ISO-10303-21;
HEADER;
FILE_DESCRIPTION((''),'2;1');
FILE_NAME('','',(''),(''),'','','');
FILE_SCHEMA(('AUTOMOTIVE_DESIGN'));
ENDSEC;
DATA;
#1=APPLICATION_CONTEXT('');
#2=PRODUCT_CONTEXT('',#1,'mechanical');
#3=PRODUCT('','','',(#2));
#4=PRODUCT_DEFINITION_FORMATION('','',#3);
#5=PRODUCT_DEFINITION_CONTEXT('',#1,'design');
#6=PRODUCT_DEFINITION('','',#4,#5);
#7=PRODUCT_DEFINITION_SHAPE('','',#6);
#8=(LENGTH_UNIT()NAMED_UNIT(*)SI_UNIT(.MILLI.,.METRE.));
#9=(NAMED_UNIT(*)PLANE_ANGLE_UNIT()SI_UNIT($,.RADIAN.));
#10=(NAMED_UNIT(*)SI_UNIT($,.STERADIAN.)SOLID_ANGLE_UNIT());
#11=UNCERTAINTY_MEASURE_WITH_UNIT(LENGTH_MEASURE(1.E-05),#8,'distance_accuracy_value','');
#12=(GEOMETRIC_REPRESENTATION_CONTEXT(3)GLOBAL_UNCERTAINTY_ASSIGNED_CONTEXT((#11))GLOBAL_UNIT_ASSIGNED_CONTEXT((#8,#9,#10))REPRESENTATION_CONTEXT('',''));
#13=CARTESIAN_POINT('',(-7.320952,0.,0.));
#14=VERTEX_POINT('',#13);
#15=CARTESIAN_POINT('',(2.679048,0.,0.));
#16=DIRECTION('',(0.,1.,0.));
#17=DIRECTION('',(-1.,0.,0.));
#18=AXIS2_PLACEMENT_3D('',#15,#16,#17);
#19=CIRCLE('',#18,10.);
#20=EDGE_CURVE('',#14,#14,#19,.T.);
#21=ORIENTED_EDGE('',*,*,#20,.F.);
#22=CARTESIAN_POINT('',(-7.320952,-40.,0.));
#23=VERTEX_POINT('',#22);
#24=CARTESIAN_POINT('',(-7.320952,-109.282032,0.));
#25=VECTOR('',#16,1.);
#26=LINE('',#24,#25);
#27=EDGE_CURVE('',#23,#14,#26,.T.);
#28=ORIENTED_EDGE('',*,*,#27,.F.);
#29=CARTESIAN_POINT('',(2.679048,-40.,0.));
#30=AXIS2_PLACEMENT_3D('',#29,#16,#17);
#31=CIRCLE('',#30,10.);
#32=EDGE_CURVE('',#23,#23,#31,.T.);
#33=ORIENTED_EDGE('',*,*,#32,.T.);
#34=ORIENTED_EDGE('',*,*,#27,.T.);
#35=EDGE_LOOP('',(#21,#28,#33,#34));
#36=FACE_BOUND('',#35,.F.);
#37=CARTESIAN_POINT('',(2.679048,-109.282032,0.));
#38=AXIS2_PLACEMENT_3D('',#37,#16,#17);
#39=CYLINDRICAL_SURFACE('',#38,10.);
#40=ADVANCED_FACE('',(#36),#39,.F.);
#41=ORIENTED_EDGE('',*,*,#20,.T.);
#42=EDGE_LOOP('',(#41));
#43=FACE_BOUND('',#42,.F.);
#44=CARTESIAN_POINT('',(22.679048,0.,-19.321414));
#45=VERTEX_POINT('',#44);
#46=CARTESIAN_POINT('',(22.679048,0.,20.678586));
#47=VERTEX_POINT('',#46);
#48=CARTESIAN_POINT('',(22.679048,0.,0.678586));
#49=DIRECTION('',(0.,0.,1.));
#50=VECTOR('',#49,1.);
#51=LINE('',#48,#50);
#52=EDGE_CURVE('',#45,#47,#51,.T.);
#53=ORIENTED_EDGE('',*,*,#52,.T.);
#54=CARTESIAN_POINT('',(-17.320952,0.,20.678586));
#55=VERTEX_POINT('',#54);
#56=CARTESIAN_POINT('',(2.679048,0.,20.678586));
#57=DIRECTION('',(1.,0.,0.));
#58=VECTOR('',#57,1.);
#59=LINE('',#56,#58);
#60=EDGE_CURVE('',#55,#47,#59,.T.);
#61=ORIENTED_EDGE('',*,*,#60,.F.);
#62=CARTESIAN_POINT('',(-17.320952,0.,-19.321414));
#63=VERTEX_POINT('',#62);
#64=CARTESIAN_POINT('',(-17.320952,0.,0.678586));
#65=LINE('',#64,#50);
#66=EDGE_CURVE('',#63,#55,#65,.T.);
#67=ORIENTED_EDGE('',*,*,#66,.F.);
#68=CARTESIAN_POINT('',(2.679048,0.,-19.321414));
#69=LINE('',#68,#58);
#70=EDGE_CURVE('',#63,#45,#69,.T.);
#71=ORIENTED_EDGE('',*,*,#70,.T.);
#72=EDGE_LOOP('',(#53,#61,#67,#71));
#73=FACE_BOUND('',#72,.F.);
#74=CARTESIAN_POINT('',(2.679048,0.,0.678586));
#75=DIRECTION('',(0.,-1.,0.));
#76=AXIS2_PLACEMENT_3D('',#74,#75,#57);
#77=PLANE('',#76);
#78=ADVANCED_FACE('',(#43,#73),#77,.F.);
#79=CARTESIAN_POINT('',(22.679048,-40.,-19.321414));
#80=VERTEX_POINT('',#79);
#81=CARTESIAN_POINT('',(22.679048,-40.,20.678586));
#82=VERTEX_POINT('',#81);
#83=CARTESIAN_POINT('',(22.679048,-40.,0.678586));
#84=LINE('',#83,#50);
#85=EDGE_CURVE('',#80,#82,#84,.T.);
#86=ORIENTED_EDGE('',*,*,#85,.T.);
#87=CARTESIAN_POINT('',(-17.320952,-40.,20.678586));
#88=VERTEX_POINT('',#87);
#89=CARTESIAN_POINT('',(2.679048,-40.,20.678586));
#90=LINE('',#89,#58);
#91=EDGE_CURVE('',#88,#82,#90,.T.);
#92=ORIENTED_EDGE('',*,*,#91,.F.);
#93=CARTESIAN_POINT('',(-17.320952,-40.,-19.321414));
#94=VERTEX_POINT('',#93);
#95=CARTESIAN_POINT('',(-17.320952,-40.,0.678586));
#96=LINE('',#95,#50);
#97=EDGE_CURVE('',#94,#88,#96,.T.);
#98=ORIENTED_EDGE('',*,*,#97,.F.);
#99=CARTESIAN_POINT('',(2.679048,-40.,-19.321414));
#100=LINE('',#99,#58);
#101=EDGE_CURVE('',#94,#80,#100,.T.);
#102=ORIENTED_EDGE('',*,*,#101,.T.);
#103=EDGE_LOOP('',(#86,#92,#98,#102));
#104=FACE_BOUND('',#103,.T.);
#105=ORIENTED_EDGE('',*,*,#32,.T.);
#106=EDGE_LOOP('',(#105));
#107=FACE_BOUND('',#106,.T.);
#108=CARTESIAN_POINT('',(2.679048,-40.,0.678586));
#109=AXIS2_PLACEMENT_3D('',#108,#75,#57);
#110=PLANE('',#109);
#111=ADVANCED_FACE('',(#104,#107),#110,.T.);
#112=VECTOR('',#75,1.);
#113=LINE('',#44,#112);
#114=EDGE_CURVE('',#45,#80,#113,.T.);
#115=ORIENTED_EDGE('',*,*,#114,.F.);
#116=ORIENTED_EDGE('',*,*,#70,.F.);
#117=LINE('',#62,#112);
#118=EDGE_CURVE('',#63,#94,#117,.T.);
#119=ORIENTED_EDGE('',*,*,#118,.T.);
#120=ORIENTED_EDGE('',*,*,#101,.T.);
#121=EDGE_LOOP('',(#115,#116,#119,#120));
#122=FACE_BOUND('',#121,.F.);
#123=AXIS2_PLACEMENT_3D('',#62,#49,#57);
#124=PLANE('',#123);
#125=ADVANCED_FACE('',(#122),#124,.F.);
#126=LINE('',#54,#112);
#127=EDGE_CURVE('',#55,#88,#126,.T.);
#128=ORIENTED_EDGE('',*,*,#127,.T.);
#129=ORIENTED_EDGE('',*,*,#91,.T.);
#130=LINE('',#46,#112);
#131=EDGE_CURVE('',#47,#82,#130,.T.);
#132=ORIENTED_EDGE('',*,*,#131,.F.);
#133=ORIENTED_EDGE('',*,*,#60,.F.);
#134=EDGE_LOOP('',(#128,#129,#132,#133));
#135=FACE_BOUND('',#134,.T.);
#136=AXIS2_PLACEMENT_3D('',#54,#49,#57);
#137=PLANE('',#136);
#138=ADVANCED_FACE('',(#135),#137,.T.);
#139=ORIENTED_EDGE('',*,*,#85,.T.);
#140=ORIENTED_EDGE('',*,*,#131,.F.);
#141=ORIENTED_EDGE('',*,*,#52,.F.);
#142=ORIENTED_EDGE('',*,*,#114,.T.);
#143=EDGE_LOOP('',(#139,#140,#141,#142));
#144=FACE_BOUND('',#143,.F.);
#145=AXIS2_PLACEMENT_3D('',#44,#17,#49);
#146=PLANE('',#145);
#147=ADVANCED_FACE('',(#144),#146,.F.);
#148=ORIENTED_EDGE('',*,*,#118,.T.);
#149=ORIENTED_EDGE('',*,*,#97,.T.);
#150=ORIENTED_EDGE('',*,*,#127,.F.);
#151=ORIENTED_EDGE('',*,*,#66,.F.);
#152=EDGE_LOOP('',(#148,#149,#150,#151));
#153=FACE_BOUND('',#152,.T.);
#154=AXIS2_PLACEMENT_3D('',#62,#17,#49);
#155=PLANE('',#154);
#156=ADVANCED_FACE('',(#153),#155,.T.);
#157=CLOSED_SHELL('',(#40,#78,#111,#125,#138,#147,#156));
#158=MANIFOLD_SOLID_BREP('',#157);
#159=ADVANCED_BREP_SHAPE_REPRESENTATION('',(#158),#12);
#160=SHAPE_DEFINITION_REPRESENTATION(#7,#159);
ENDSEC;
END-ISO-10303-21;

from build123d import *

# Parameters (mm, degrees)
F0_W     = 40
F0_H     = 40
F1_DEPTH = 40
F3_D     = 20


# Not quite as in the source:
# - a feature names something its author has since deleted; it is built from what else it names


with BuildPart() as f1:
    # F0 (on Front) → F1 (new body)
    with BuildSketch(Plane.XZ):
        with Locations((2.679047659, 0.6785862893)):
            Rectangle(F0_W, F0_H)
    extrude(amount=F1_DEPTH)

    # F3 (through all)
    with Locations(Plane.XZ.offset(40)):
        with Locations((2.679047659, 0)):
            Hole(F3_D / 2)


solid = f1.part
